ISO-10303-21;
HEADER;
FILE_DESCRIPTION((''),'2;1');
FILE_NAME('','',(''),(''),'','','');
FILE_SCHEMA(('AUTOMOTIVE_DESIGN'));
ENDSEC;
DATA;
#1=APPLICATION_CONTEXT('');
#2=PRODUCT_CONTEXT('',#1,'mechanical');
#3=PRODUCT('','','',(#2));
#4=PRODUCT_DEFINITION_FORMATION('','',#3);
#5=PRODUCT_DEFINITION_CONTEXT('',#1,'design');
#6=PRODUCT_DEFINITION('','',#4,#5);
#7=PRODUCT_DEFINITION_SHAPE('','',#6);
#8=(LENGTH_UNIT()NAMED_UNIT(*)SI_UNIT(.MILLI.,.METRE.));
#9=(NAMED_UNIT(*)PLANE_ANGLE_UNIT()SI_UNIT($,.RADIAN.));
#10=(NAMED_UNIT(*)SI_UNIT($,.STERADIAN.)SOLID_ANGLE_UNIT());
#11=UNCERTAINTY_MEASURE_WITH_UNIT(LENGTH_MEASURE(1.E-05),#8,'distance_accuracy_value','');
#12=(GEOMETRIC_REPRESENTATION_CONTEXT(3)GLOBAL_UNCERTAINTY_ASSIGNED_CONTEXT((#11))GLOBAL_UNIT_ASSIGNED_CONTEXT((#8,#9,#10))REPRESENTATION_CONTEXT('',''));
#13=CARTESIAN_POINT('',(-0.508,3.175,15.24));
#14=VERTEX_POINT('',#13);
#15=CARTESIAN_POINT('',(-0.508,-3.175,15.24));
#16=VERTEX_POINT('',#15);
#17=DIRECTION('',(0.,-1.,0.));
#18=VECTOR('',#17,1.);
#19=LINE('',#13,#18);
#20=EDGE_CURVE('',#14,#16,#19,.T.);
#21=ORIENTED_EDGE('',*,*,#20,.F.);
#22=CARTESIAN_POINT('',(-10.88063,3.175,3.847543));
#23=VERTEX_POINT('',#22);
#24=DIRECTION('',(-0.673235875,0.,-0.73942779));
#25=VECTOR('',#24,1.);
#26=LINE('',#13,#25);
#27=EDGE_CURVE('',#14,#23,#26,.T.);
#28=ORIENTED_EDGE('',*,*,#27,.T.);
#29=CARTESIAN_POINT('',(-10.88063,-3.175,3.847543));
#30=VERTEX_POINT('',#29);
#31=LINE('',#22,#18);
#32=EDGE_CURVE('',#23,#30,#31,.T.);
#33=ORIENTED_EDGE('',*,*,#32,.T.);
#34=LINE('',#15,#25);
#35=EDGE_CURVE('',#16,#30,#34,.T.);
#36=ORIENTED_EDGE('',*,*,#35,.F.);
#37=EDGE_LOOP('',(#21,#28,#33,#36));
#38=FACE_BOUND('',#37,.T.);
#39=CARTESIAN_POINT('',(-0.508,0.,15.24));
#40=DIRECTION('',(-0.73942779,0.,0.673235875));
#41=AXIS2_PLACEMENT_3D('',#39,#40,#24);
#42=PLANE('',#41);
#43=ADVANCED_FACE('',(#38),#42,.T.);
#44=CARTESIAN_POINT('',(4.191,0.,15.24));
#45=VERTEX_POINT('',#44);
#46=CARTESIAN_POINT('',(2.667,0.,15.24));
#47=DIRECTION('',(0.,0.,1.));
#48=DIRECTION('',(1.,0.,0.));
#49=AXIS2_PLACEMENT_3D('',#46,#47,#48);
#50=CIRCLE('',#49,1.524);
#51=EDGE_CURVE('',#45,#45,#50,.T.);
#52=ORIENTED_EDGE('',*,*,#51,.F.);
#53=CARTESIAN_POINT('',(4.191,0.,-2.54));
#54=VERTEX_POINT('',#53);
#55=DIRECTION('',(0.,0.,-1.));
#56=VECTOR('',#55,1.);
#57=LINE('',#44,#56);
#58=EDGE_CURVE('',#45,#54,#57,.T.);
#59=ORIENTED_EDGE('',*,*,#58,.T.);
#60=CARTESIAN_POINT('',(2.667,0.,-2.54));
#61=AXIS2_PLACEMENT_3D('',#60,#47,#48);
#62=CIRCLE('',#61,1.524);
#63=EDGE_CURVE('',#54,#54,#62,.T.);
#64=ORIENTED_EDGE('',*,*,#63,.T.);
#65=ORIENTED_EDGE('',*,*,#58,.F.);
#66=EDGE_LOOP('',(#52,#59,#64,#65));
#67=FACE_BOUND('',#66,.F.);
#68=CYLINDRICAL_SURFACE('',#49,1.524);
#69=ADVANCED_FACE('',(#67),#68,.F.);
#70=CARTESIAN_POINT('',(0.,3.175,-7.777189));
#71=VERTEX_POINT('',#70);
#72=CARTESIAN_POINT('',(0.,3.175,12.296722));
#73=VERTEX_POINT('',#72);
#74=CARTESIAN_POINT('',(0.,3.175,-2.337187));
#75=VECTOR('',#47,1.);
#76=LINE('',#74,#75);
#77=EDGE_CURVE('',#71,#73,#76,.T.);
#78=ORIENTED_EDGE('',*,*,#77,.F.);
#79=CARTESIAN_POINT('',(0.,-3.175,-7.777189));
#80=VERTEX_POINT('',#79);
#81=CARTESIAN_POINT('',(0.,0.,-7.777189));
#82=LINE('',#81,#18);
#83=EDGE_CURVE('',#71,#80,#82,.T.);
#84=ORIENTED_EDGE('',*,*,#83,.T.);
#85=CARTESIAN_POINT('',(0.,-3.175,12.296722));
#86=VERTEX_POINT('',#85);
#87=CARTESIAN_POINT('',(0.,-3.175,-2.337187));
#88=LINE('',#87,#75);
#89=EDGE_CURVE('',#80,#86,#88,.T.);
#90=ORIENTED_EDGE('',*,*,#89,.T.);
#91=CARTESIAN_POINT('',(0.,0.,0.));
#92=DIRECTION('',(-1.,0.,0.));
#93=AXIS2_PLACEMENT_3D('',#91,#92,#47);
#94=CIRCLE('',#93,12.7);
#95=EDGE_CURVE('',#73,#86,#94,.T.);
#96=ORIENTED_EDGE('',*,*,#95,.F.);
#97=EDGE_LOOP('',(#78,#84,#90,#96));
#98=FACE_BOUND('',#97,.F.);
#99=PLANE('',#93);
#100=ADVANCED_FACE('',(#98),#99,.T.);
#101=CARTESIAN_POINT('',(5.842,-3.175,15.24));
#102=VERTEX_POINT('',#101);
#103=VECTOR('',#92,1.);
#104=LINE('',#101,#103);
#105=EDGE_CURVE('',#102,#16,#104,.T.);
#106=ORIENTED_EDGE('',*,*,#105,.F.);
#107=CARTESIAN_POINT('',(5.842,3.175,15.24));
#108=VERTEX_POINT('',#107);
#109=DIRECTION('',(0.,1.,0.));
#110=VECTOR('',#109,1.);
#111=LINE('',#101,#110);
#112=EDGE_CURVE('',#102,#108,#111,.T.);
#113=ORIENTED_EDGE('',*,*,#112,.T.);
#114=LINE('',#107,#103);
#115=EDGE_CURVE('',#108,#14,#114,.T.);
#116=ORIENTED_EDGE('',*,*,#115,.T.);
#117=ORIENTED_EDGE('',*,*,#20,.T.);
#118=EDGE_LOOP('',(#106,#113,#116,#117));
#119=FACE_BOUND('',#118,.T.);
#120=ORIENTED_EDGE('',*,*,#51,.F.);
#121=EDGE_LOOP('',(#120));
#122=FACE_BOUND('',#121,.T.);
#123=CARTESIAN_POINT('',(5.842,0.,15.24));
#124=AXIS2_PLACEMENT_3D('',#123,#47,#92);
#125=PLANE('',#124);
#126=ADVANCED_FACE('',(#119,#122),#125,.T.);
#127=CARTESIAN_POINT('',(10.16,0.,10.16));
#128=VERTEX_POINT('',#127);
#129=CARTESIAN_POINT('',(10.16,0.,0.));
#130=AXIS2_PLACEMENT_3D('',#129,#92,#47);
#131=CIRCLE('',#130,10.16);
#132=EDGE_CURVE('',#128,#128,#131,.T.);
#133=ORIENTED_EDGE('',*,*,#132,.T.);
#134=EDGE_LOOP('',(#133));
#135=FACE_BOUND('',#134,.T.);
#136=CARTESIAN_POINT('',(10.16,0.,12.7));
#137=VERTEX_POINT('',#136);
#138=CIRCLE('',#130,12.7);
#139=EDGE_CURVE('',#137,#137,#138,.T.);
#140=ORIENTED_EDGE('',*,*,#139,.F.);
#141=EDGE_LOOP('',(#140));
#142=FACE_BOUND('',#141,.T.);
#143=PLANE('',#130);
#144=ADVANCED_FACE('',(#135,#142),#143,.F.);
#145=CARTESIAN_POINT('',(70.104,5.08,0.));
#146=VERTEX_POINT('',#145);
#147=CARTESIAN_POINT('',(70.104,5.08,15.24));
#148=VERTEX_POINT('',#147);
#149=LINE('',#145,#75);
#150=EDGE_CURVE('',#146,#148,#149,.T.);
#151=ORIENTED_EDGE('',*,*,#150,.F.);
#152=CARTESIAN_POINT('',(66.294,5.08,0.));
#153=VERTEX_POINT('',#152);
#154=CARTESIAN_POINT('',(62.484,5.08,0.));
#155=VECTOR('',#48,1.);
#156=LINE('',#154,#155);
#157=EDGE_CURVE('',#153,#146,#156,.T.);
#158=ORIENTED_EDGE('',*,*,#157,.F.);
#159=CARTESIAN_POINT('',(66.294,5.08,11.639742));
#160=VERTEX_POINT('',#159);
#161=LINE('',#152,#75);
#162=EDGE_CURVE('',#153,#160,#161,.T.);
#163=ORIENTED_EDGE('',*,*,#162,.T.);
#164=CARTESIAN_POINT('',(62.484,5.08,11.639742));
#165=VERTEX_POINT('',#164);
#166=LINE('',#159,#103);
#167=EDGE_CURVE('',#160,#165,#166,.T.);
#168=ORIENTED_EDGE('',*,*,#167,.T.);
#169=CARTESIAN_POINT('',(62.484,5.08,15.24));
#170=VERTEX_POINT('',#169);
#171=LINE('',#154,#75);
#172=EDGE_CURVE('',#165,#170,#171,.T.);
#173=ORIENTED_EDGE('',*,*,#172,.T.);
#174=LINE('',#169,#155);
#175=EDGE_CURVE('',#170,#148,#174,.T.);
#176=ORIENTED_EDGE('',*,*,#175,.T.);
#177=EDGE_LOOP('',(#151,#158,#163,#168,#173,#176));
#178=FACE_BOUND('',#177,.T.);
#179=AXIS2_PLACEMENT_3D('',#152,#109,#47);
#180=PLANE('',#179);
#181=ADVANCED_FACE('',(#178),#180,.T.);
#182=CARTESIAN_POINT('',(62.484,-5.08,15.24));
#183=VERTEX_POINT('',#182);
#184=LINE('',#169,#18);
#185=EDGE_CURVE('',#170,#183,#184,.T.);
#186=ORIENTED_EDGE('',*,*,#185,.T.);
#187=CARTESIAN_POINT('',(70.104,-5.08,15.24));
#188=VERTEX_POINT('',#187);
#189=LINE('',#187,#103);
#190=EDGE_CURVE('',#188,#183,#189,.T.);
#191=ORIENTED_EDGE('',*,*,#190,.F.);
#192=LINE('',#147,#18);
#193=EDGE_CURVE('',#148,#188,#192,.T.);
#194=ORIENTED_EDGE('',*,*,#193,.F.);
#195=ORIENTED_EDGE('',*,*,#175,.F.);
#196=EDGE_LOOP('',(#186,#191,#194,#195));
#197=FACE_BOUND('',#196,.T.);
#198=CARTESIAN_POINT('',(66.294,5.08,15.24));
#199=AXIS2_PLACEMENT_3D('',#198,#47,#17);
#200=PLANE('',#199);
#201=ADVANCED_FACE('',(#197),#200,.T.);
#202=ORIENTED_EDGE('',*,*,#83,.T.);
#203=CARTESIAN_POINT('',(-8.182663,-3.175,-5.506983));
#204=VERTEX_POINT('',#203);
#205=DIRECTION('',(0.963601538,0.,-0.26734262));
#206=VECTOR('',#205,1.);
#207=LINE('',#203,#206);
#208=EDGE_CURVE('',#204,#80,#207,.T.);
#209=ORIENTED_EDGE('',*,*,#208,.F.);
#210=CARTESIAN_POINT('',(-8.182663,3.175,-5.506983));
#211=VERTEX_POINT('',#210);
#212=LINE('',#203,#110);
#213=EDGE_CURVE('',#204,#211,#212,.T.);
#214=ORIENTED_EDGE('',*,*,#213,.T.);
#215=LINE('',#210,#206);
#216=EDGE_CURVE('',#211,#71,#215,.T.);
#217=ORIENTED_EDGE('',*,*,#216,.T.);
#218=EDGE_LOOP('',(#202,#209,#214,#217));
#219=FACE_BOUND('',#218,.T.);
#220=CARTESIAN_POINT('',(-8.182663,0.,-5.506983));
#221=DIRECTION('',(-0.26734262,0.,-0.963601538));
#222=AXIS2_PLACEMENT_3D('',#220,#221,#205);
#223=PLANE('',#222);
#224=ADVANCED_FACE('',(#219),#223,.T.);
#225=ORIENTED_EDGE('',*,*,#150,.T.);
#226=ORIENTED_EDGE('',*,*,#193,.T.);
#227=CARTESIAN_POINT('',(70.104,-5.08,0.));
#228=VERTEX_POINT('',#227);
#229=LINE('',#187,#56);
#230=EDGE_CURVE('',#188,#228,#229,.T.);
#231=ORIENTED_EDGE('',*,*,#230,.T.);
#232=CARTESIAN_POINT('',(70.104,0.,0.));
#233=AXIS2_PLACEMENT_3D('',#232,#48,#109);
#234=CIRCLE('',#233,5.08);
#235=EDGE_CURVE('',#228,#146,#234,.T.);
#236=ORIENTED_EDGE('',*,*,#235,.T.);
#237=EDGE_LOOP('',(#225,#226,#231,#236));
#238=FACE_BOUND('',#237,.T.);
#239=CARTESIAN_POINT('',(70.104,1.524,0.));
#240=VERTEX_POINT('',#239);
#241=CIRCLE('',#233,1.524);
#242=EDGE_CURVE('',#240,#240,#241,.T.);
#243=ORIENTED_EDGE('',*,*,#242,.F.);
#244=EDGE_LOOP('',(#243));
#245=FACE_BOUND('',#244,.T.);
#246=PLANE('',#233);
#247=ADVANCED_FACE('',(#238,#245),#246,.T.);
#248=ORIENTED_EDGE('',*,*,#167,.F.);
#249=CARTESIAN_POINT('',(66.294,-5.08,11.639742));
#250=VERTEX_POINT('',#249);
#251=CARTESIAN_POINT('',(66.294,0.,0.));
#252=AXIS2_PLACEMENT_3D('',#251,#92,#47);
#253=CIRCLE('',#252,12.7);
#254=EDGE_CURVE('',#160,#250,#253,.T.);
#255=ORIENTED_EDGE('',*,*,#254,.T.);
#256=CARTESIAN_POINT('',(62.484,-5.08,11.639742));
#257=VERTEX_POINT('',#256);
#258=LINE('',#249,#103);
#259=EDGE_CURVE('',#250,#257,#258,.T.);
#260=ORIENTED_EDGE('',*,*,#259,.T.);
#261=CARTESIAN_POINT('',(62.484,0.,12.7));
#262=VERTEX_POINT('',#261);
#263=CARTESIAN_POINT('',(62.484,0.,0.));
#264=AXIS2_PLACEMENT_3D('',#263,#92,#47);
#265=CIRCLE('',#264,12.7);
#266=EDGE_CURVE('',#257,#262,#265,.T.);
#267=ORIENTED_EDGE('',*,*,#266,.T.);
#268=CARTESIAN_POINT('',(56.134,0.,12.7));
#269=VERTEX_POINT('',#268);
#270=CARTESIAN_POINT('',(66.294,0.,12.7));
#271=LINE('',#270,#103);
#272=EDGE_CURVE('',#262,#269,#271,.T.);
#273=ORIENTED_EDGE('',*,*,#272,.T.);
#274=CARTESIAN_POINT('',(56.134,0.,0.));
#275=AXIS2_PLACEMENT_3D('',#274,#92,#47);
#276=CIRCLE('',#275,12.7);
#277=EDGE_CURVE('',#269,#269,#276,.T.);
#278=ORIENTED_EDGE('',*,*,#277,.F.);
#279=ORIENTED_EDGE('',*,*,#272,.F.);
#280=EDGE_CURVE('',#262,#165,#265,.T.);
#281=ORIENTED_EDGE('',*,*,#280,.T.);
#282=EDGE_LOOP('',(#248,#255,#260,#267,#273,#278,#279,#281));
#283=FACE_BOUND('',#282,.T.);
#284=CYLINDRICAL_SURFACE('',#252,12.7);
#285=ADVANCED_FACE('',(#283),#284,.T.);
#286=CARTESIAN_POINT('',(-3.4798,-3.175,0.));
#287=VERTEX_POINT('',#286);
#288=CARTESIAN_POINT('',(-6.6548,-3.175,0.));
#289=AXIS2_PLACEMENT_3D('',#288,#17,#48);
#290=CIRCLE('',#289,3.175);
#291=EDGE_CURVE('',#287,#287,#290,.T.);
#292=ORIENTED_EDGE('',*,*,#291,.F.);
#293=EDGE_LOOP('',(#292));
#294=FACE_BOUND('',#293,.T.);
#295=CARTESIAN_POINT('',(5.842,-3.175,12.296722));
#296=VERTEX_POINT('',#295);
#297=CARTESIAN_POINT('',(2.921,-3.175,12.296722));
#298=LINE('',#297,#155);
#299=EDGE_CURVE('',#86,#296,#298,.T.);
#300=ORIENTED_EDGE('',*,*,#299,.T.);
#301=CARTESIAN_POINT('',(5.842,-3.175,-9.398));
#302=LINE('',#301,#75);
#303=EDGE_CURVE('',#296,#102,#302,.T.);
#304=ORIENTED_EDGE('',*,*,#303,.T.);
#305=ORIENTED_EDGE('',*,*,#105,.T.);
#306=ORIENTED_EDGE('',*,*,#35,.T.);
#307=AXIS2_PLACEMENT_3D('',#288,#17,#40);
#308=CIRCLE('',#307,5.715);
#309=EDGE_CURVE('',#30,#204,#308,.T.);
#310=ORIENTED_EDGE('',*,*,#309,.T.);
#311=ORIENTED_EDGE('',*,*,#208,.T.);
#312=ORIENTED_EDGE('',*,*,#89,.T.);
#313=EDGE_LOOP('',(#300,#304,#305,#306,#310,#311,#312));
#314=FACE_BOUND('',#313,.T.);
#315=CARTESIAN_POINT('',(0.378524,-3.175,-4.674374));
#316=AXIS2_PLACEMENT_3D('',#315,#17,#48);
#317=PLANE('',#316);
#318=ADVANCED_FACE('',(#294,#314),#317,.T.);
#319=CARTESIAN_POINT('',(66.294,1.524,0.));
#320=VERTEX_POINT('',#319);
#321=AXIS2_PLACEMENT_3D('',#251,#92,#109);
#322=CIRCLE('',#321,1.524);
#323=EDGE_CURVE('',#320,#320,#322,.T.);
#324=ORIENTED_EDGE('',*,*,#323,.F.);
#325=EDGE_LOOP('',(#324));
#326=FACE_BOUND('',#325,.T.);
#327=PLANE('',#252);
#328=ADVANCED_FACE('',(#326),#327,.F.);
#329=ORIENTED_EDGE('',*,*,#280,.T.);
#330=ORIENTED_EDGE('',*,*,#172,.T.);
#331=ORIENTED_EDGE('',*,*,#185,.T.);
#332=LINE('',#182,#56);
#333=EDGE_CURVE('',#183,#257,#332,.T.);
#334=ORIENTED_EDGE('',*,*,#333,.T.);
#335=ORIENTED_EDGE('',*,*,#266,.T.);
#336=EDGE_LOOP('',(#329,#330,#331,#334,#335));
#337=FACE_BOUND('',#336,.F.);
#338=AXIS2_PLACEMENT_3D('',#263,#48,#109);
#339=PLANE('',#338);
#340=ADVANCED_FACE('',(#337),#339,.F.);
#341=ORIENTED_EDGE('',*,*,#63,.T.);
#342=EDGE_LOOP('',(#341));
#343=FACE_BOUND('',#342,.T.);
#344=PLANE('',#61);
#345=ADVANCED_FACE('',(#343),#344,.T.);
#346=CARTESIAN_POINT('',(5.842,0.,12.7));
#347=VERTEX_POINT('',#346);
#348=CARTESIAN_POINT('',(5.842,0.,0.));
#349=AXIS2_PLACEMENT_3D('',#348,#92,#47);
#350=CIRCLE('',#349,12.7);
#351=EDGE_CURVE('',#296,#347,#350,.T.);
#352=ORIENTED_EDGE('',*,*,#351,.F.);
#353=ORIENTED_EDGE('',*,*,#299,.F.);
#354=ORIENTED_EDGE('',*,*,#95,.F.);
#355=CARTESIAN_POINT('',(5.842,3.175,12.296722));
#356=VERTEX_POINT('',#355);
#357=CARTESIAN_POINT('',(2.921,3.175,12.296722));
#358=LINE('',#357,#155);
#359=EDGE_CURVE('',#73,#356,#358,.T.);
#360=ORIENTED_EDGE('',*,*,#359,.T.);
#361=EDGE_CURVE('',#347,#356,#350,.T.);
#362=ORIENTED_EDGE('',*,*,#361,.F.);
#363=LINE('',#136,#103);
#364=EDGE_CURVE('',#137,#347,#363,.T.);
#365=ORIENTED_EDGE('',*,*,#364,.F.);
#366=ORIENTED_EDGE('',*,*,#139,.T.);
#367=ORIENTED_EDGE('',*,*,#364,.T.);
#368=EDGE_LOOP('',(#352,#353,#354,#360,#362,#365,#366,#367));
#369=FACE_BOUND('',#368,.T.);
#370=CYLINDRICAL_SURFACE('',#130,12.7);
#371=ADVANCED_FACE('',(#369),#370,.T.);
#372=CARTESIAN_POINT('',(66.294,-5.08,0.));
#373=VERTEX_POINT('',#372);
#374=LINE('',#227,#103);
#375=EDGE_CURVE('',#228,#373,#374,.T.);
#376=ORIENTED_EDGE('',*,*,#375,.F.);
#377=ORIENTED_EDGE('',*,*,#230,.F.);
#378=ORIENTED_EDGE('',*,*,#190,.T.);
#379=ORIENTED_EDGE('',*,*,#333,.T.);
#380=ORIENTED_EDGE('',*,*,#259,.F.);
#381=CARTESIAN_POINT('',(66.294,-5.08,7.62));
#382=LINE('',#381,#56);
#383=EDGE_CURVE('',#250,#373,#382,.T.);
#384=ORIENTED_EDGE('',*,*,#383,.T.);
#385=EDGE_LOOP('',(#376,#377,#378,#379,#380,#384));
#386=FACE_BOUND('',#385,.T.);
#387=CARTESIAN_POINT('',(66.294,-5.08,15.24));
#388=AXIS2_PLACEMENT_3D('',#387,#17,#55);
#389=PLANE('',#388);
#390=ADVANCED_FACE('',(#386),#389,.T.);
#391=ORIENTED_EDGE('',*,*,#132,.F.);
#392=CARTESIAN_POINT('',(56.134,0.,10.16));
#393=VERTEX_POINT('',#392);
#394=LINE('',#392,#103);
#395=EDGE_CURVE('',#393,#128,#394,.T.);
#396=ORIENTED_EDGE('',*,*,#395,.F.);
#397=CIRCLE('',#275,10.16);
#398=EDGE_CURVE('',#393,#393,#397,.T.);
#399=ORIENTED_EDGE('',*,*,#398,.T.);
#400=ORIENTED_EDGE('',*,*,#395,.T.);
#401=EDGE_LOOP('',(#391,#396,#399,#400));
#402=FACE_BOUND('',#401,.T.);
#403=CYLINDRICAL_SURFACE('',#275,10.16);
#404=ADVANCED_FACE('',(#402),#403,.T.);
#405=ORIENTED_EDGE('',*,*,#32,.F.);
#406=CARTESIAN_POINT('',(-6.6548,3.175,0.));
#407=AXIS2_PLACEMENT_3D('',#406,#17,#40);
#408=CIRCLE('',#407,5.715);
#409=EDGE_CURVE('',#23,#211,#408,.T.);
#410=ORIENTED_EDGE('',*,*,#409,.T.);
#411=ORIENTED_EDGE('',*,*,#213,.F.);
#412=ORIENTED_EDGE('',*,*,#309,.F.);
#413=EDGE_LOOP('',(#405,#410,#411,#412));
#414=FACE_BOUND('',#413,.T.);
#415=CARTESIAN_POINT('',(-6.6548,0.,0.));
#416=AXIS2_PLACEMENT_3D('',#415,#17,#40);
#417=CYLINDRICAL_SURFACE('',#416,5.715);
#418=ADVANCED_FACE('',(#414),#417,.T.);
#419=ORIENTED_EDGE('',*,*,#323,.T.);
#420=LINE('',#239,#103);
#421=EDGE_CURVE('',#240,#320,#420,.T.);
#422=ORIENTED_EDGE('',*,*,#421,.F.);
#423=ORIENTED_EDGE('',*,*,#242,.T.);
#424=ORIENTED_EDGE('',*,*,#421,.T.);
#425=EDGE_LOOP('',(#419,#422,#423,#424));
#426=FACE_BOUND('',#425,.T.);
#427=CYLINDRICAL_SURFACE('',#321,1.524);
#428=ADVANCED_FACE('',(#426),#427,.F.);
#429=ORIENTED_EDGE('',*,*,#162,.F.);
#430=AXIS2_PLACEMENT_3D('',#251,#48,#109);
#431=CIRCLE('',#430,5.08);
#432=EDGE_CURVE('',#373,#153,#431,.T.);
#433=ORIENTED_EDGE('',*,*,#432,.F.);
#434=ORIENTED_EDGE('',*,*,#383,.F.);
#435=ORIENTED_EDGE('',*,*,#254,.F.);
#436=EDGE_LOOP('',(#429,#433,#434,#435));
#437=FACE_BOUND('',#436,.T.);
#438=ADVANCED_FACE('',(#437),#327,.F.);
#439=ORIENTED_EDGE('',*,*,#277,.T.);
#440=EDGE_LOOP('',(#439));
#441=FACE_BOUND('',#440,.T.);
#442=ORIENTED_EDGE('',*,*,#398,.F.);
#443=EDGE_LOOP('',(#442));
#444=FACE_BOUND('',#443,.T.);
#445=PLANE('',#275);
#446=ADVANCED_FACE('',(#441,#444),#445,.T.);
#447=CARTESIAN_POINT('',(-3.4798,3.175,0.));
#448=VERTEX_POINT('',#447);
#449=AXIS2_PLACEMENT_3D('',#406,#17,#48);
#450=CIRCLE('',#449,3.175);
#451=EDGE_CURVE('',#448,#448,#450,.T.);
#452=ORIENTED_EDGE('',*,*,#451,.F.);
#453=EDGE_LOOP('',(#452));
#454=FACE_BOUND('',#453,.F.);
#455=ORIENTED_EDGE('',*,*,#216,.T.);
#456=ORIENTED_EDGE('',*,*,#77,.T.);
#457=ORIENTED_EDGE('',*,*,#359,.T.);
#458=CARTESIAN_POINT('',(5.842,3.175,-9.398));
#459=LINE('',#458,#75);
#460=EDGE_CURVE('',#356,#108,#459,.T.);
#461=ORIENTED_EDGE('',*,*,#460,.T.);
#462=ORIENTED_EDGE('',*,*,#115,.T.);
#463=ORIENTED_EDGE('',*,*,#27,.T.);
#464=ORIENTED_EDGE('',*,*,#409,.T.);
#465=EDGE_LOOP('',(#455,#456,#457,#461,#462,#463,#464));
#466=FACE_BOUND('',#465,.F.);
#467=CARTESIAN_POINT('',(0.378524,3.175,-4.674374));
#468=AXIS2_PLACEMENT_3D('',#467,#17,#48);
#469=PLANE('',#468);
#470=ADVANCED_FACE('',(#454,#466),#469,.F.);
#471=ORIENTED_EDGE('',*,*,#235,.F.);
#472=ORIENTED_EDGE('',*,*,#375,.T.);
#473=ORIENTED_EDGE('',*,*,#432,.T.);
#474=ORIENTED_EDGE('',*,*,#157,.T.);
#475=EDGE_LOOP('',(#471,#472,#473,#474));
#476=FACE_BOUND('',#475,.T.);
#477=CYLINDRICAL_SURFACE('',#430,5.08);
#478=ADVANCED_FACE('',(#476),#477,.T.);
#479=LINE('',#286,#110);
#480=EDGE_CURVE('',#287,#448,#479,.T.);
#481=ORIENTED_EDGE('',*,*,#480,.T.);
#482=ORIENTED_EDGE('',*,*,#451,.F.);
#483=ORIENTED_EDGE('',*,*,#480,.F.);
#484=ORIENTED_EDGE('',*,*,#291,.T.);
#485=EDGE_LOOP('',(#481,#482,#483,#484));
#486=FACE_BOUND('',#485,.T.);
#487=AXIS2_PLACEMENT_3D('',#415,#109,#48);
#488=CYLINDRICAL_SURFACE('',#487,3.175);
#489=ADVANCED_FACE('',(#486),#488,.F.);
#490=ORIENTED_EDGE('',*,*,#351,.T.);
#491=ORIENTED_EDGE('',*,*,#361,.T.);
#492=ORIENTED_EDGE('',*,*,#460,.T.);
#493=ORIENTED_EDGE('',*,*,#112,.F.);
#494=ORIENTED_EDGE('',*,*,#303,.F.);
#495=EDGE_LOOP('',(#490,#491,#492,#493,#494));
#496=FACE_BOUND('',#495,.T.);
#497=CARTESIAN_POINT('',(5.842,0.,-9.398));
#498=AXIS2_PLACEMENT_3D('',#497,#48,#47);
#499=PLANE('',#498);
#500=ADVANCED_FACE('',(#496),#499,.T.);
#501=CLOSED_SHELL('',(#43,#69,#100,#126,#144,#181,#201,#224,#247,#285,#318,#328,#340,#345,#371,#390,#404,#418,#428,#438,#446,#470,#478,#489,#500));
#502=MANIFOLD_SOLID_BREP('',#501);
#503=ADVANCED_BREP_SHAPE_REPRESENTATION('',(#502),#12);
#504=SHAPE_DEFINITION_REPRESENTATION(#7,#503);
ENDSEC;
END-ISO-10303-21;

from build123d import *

# Parameters (mm, degrees)
F0_R     = 3.175
F0_W     = 5.842
F0_H     = 12.7
F2_DEPTH = 3.175
F4_R     = 1.524
F5_DEPTH = 3.81
F7_R     = 1.524
F9_DEPTH = 17.78


# Not quite as in the source:
# - the program builds the solid bodies; features that only make, move or delete a surface that nothing else refers to are left out


with BuildPart() as f1:
    # F0 (on Front) → F1 (revolve)
    with BuildSketch(Plane.XZ):
        Polygon((5.842, 12.7), (5.842, 0), (66.294, 0), (66.294, 12.7), (56.134, 12.7), (56.134, 10.16), (10.16, 10.16), (10.16, 12.7), align=None)
    revolve(axis=Axis((33.147, 0, 0), (-1, 0, 0)))

    # F0 (on Front) → F2 (join, symmetric)
    with BuildSketch(Plane.XZ):
        with BuildLine():
            Line((5.842, 0), (0, 0))
            Line((0, 0), (-0.9398, 0))
            ThreePointArc((-0.9398, 0), (-3.1957909266, -4.5493385486), (-8.1826630726, -5.5069827884))
            Line((-8.1826630726, -5.5069827884), (5.842, -9.398))
            Line((5.842, -9.398), (5.842, 0))
        make_face()
        with BuildLine():
            ThreePointArc((-8.1826630726, -5.5069827884), (-3.1957909266, -4.5493385486), (-0.9398, 0))
            ThreePointArc((-0.9398, 0), (-4.5919612295, 5.3297205562), (-10.8806298187, 3.8475430269))
            ThreePointArc((-10.8806298187, 3.8475430269), (-12.1459778134, -1.5837270034), (-8.1826630726, -5.5069827884))
        make_face()
        with Locations((-6.6548, 0)):
            Circle(F0_R, mode=Mode.SUBTRACT)
        with BuildLine():
            Line((-0.9398, 0), (0, 0))
            Line((0, 0), (0, 12.7))
            Line((0, 12.7), (5.842, 12.7))
            Line((5.842, 12.7), (5.842, 15.24))
            Line((5.842, 15.24), (-0.508, 15.24))
            Line((-0.508, 15.24), (-10.8806298187, 3.8475430269))
            ThreePointArc((-10.8806298187, 3.8475430269), (-4.5919612295, 5.3297205562), (-0.9398, 0))
        make_face()
        with Locations((2.921, 6.35)):
            Rectangle(F0_W, F0_H)
    extrude(amount=F2_DEPTH, both=True)

    # F0 (on Front) → F3 (revolve)
    with BuildSketch(Plane.XZ):
        with Locations((2.921, 6.35)):
            Rectangle(F0_W, F0_H)
    revolve(axis=Axis((33.147, 0, 0), (-1, 0, 0)))

    # F4 (on face) → F5 (join, symmetric)
    with BuildSketch(Plane.YZ.offset(66.294)):
        with BuildLine():
            ThreePointArc((-5.08, 0), (0, -5.08), (5.08, 0))
            ThreePointArc((5.08, 0), (0, 5.08), (-5.08, 0))
        make_face()
        Circle(F4_R, mode=Mode.SUBTRACT)
        with BuildLine():
            ThreePointArc((-5.08, 0), (0, 5.08), (5.08, 0))
            Line((5.08, 0), (5.08, 11.6397422652))
            ThreePointArc((5.08, 11.6397422652), (0, 12.7), (-5.08, 11.6397422652))
            Line((-5.08, 11.6397422652), (-5.08, 0))
        make_face()
        with BuildLine():
            ThreePointArc((-5.08, 11.6397422652), (0, 12.7), (5.08, 11.6397422652))
            Line((5.08, 11.6397422652), (5.08, 15.24))
            Line((5.08, 15.24), (-5.08, 15.24))
            Line((-5.08, 15.24), (-5.08, 11.6397422652))
        make_face()
    extrude(amount=F5_DEPTH, both=True)

    # F7 (on face) → F9 (cut)
    with BuildSketch(Plane.XY.offset(15.24)):
        with Locations((2.667, 0)):
            Circle(F7_R)
    extrude(amount=-F9_DEPTH, mode=Mode.SUBTRACT)


solid = f1.part
